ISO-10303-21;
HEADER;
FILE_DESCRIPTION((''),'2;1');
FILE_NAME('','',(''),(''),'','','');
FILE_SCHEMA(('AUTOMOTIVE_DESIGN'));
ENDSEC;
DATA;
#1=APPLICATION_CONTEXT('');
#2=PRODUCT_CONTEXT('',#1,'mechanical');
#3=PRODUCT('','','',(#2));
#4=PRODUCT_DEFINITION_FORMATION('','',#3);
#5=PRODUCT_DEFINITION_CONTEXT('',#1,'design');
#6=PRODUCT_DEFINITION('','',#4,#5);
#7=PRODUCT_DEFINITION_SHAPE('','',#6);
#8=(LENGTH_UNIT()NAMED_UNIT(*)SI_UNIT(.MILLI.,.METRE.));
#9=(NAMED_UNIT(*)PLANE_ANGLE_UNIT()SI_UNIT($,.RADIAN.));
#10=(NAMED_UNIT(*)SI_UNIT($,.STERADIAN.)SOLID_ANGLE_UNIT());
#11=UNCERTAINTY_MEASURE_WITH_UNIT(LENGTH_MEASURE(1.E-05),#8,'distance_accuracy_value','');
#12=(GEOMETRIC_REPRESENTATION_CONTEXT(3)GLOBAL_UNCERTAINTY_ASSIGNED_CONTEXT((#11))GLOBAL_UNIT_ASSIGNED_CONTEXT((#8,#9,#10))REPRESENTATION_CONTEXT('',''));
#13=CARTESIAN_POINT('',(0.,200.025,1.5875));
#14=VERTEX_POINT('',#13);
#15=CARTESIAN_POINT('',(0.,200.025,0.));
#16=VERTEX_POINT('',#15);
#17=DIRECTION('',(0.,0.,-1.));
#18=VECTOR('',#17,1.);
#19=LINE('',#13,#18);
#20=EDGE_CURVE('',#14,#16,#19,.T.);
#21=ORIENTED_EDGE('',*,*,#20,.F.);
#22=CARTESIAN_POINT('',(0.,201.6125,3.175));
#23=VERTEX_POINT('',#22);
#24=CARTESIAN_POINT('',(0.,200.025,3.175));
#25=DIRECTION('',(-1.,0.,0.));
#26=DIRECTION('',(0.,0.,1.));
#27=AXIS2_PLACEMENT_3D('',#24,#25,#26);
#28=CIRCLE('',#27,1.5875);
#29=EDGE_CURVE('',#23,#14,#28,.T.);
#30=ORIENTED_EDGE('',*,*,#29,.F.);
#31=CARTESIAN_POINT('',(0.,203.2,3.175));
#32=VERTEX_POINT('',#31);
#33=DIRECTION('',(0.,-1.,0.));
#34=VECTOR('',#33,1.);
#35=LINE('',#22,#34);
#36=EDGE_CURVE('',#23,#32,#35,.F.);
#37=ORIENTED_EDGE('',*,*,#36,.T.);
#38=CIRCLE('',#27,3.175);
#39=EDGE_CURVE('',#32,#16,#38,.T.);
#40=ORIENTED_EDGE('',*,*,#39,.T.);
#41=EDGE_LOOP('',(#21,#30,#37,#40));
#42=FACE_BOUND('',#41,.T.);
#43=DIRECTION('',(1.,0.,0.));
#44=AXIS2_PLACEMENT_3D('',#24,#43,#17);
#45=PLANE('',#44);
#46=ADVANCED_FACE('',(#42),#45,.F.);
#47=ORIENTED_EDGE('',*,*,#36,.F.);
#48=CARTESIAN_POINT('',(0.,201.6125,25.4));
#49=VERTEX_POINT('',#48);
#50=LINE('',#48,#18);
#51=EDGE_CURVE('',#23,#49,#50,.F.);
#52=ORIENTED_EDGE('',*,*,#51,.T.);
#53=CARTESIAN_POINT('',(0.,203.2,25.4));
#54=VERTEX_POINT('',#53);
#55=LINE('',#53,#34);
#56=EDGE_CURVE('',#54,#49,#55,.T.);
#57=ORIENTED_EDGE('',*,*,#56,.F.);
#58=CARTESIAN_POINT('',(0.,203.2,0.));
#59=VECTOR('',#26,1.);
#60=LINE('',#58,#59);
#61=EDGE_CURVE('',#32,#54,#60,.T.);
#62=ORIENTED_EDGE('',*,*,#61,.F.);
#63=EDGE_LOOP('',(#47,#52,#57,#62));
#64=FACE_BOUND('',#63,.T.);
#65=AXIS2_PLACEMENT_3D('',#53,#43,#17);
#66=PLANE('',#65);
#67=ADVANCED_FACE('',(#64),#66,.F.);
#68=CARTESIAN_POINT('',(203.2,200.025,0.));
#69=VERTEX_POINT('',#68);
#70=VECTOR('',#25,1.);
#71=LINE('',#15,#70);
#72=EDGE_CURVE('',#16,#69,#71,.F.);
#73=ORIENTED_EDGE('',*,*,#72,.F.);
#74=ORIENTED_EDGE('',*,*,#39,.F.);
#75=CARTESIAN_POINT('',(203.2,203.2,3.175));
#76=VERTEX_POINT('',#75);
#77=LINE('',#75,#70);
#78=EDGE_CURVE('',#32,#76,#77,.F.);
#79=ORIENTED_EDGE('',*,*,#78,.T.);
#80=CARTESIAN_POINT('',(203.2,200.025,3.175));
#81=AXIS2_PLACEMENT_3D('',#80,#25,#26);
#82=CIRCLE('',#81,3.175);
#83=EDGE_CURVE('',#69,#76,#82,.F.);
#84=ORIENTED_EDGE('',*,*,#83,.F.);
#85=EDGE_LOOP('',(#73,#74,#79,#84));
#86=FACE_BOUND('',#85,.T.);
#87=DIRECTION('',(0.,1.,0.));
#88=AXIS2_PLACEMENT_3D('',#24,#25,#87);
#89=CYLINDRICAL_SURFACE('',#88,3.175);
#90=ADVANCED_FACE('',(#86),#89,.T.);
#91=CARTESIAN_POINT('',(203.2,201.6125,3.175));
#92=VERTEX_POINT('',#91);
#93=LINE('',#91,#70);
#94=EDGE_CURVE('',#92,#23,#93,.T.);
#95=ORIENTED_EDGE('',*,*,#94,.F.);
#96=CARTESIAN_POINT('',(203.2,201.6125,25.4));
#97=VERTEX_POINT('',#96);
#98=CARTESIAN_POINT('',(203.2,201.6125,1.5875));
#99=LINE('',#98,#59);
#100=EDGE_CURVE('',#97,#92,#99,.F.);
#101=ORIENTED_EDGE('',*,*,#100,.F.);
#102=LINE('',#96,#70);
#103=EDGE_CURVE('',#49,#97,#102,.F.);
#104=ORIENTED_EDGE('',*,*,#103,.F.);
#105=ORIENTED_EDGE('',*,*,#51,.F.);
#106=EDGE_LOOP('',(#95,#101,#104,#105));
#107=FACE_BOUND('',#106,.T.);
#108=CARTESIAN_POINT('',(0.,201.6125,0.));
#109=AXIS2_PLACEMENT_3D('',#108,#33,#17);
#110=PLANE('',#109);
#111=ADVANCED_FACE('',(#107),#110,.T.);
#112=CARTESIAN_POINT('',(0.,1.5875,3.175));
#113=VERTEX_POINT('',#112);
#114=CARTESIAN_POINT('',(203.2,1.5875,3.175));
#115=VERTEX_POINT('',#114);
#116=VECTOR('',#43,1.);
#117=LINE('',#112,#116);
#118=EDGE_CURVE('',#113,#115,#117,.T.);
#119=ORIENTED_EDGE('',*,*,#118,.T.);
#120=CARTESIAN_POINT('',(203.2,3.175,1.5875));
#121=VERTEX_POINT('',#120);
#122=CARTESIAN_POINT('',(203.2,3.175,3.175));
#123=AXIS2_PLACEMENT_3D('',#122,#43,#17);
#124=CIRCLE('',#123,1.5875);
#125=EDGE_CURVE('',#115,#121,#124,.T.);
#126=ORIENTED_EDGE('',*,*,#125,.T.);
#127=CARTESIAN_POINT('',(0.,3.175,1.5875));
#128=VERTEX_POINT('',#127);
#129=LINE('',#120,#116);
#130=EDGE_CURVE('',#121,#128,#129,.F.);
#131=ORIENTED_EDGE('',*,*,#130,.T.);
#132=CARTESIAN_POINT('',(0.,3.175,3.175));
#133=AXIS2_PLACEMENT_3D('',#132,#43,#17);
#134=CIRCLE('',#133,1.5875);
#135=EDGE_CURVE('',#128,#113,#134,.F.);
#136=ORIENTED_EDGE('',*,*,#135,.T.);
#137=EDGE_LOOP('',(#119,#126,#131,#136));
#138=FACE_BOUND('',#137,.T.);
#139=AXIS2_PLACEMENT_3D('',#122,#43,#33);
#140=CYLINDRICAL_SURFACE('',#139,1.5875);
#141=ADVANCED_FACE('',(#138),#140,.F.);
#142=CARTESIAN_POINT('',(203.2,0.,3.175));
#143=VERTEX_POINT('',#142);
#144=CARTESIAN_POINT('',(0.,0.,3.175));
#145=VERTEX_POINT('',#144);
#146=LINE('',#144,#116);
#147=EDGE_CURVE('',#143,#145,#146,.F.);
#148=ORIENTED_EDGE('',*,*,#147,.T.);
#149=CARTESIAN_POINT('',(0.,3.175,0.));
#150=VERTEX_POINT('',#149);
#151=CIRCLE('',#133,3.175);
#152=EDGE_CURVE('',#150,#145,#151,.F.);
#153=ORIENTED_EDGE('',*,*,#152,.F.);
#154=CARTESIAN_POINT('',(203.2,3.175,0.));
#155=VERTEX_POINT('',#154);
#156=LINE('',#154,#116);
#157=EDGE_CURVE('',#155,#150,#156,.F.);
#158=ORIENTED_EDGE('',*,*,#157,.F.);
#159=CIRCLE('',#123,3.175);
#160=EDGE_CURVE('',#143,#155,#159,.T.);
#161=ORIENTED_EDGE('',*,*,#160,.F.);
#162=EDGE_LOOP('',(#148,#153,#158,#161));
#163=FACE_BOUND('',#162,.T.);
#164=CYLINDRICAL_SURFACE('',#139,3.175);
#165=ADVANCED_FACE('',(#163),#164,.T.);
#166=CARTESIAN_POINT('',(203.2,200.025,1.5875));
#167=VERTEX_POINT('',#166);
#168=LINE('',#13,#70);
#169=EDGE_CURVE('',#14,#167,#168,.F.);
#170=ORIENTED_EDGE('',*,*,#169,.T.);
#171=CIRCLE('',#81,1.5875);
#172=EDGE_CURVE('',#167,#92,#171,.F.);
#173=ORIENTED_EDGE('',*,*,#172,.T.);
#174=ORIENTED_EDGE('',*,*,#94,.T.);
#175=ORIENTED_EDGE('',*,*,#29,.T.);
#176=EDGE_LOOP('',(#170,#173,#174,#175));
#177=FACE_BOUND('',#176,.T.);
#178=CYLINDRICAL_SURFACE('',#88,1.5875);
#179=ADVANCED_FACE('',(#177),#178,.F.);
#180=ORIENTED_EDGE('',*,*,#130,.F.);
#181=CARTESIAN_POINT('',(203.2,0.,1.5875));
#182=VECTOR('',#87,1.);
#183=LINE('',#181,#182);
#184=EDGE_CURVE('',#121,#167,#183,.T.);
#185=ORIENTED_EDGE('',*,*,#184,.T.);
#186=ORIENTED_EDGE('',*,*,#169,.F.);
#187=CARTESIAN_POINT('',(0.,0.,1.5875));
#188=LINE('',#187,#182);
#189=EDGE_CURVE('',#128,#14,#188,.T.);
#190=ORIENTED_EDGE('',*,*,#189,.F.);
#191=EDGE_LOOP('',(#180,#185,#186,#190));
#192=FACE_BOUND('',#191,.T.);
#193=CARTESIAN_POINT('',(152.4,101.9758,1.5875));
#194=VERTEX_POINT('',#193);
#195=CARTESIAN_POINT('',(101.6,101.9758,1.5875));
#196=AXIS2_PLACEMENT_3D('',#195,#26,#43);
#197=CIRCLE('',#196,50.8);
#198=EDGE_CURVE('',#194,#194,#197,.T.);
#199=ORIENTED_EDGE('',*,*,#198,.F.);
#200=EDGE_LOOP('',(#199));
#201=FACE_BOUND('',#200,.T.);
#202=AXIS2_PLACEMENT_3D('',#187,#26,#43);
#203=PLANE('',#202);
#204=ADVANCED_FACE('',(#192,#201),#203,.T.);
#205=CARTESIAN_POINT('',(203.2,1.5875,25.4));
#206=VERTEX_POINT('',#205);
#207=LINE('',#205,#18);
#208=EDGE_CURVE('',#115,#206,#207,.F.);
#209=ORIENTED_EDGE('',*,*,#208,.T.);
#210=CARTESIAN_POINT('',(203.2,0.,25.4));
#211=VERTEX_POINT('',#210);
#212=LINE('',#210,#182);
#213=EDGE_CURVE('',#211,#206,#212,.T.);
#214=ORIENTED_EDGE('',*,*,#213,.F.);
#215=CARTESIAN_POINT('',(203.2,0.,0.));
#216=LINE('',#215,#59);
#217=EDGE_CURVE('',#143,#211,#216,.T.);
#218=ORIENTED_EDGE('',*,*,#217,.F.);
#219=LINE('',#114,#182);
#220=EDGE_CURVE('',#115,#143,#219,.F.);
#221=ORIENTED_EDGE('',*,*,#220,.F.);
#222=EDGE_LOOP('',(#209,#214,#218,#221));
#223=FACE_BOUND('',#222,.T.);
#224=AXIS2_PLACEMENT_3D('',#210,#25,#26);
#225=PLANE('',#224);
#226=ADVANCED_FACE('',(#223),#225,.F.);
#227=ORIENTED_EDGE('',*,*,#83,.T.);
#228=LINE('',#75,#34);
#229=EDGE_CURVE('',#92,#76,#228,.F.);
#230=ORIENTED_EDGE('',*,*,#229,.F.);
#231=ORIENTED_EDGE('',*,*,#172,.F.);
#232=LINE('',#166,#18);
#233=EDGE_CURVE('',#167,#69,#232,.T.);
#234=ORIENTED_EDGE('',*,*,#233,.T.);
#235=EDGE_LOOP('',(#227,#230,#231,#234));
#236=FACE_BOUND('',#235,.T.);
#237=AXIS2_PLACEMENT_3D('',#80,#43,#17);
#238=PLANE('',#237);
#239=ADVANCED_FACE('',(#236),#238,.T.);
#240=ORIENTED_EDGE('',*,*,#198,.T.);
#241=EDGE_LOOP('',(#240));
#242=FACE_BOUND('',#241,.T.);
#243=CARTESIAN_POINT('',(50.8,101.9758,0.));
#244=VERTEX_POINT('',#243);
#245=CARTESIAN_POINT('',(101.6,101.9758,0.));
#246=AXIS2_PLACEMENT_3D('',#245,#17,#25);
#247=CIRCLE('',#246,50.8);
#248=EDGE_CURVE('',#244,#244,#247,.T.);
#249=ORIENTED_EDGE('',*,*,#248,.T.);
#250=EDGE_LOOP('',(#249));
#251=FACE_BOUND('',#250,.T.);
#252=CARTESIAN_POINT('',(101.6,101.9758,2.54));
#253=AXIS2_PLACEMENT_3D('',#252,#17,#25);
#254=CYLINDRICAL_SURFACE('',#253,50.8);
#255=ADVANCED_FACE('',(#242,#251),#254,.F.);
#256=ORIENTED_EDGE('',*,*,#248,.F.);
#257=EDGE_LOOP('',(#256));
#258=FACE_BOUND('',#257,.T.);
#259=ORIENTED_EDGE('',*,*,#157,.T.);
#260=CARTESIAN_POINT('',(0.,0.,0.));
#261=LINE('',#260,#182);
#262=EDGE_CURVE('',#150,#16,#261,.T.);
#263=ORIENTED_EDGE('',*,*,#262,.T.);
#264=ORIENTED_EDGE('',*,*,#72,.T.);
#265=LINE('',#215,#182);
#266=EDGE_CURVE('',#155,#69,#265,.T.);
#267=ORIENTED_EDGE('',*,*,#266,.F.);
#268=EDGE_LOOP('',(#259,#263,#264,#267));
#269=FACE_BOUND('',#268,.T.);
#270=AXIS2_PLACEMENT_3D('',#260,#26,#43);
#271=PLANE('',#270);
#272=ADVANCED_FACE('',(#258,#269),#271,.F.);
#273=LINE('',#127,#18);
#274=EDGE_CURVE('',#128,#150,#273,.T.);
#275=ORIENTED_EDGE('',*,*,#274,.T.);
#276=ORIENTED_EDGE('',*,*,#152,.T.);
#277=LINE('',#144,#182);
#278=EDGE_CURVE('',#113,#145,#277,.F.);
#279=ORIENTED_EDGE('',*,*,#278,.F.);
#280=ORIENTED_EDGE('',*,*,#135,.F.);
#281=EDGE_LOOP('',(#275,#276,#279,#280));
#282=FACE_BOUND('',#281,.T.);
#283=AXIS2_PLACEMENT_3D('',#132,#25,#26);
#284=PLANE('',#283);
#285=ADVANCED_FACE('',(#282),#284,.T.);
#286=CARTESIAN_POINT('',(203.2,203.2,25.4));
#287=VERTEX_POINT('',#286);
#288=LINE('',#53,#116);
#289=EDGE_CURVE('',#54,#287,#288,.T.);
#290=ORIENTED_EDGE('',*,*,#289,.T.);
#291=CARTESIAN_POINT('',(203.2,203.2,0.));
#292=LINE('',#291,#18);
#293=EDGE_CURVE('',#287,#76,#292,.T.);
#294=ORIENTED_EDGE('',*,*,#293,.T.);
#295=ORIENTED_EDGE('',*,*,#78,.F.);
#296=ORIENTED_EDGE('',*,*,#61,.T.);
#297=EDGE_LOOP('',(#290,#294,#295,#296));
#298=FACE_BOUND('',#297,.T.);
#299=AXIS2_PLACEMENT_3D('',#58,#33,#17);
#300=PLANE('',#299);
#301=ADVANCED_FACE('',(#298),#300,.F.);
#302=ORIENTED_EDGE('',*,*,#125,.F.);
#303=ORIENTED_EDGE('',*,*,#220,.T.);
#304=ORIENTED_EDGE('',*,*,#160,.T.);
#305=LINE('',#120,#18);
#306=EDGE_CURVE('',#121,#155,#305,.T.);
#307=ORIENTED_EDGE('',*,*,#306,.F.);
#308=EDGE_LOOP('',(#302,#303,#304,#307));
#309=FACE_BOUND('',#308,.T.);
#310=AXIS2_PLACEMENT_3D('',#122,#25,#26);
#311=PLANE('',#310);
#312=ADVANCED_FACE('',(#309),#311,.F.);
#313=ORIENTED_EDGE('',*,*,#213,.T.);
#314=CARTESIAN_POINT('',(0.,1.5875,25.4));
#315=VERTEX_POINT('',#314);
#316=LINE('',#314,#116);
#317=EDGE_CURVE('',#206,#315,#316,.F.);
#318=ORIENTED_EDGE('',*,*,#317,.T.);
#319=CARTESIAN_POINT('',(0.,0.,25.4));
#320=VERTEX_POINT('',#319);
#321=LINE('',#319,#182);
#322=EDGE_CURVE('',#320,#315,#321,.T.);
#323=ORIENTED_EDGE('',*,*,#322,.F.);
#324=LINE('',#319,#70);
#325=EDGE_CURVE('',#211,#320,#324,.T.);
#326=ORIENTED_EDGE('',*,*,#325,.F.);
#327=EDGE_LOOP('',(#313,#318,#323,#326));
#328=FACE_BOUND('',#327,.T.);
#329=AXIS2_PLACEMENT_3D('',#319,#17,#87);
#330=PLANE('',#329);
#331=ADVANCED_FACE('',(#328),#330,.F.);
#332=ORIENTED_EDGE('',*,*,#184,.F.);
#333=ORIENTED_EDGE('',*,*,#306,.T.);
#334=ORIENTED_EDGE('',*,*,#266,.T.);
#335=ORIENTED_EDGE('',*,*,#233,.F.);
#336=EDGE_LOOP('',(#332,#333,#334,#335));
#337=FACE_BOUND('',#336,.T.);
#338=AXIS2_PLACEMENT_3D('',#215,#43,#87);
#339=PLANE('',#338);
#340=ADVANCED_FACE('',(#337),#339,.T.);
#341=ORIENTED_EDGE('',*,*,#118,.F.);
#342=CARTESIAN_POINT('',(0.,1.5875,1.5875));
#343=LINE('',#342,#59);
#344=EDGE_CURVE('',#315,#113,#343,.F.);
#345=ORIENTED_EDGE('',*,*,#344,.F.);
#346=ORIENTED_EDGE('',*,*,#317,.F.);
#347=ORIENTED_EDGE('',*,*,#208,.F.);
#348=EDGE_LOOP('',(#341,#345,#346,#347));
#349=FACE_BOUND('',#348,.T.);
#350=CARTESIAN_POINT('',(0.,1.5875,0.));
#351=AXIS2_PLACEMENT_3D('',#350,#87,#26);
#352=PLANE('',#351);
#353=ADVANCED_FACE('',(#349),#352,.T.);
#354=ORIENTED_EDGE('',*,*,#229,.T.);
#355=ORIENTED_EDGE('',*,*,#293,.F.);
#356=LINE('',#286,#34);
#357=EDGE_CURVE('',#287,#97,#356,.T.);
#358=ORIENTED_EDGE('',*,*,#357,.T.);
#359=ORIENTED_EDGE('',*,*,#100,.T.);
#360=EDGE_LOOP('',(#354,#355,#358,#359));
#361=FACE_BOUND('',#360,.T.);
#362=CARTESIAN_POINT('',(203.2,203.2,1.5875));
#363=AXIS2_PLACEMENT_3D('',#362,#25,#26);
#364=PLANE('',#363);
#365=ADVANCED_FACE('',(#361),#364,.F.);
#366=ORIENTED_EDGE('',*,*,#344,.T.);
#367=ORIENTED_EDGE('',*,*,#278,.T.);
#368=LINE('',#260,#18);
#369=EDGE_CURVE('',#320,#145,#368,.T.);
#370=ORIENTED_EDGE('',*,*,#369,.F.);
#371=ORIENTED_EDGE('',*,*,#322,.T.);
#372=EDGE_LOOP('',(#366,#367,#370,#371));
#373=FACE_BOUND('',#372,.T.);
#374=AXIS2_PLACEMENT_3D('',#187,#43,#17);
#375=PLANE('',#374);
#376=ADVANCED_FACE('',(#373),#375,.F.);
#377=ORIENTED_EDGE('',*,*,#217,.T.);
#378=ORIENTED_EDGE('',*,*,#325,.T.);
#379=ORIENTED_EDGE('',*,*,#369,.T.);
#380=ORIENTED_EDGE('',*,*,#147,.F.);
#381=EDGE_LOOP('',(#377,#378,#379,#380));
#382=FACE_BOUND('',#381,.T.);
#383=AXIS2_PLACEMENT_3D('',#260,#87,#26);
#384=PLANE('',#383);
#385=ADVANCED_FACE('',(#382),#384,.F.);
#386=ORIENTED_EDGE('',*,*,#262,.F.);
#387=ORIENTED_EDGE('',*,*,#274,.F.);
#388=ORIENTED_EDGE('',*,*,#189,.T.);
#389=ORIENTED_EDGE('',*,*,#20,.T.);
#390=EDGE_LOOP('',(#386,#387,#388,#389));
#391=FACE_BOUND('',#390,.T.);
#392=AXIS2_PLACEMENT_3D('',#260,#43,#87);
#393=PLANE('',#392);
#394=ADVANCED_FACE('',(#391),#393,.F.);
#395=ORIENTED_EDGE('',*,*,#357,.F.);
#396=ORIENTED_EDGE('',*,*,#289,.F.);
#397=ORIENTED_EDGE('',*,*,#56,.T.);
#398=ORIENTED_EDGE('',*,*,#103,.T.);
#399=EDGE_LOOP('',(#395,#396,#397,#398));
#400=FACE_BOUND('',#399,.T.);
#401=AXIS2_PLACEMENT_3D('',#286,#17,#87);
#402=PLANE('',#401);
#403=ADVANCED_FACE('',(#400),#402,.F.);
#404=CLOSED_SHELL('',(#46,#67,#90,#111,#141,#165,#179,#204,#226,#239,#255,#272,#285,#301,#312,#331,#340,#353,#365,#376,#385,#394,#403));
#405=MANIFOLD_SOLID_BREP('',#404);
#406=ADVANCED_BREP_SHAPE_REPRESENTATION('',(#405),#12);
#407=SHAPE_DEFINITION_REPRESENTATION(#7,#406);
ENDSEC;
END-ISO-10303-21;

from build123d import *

# Parameters (mm, degrees)
SKETCH1_W                      = 203.2
SKETCH1_H                      = 203.2
BOSS_EXTRUDE2_DEPTH            = 1.5875
EDGE_FLANGE1_STRIP_W           = 9.525
EDGE_FLANGE1_STRIP_H           = 1.5875
EDGE_FLANGE1_STRIP_CUT_DEPTH   = 203.2
EDGE_FLANGE1_STRIP_2_W         = 9.525
EDGE_FLANGE1_STRIP_2_H         = 1.5875
EDGE_FLANGE1_STRIP_CUT_2_DEPTH = 203.2
EDGE_FLANGE1_DEPTH             = 203.2
EDGE_FLANGE1_BEND_DEPTH        = 203.2
SKETCH16_R                     = 50.8
CUT_EXTRUDE1_DEPTH             = 2.54


# Sheet-metal steps are written as plain solids
with BuildPart() as part:
    # Sketch1 → Boss-Extrude2 (new body)
    with BuildSketch(Plane.XY):
        with Locations((101.6, 101.6)):
            Rectangle(SKETCH1_W, SKETCH1_H)
    extrude(amount=BOSS_EXTRUDE2_DEPTH)

    # Edge-Flange1 strip (across the edge) → Edge-Flange1 strip cut (cut)
    with BuildSketch(Plane(origin=(203.2, 203.2, 1.5875), x_dir=(0, -1, 0), z_dir=(-1, 0, 0))):
        with Locations((-1.5875, -0.79375)):
            Rectangle(EDGE_FLANGE1_STRIP_W, EDGE_FLANGE1_STRIP_H)
    extrude(amount=EDGE_FLANGE1_STRIP_CUT_DEPTH, mode=Mode.SUBTRACT)

    # Edge-Flange1 strip 2 (across the edge) → Edge-Flange1 strip cut 2 (cut)
    with BuildSketch(Plane(origin=(0, 0, 1.5875), x_dir=(0, 1, 0), z_dir=(1, 0, 0))):
        with Locations((-1.5875, -0.79375)):
            Rectangle(EDGE_FLANGE1_STRIP_2_W, EDGE_FLANGE1_STRIP_2_H)
    extrude(amount=EDGE_FLANGE1_STRIP_CUT_2_DEPTH, mode=Mode.SUBTRACT)

    # Edge-Flange1 section (across the edge) → Edge-Flange1 (add)
    with BuildSketch(Plane(origin=(203.2, 203.2, 1.5875), x_dir=(0, -1, 0), z_dir=(-1, 0, 0))):
        with BuildLine():
            Line((0, 1.5875), (0, 23.8125))
            Line((0, 23.8125), (1.5875, 23.8125))
            Line((1.5875, 23.8125), (1.5875, 1.5875))
            ThreePointArc((1.5875, 1.5875), (2.052467985, 0.464967985), (3.175, 0))
            Line((3.175, 0), (3.175, -1.5875))
            ThreePointArc((3.175, -1.5875), (0.92993597, -0.65756403), (0, 1.5875))
        make_face()
    extrude(amount=EDGE_FLANGE1_DEPTH)

    # Edge-Flange1 section 2 (across the edge) → Edge-Flange1 bend (add)
    with BuildSketch(Plane(origin=(0, 0, 1.5875), x_dir=(0, 1, 0), z_dir=(1, 0, 0))):
        with BuildLine():
            Line((0, 1.5875), (0, 23.8125))
            Line((0, 23.8125), (1.5875, 23.8125))
            Line((1.5875, 23.8125), (1.5875, 1.5875))
            ThreePointArc((1.5875, 1.5875), (2.052467985, 0.464967985), (3.175, 0))
            Line((3.175, 0), (3.175, -1.5875))
            ThreePointArc((3.175, -1.5875), (0.92993597, -0.65756403), (0, 1.5875))
        make_face()
    extrude(amount=EDGE_FLANGE1_BEND_DEPTH)

    # Sketch16 → Cut-Extrude1 (cut)
    with BuildSketch(Plane(origin=(0, 0, 0), x_dir=(-1, 0, 0), z_dir=(0, 0, -1))):
        with Locations((-101.6, 101.975799724)):
            Circle(SKETCH16_R)
    extrude(amount=-CUT_EXTRUDE1_DEPTH, mode=Mode.SUBTRACT)


solid = part.part
